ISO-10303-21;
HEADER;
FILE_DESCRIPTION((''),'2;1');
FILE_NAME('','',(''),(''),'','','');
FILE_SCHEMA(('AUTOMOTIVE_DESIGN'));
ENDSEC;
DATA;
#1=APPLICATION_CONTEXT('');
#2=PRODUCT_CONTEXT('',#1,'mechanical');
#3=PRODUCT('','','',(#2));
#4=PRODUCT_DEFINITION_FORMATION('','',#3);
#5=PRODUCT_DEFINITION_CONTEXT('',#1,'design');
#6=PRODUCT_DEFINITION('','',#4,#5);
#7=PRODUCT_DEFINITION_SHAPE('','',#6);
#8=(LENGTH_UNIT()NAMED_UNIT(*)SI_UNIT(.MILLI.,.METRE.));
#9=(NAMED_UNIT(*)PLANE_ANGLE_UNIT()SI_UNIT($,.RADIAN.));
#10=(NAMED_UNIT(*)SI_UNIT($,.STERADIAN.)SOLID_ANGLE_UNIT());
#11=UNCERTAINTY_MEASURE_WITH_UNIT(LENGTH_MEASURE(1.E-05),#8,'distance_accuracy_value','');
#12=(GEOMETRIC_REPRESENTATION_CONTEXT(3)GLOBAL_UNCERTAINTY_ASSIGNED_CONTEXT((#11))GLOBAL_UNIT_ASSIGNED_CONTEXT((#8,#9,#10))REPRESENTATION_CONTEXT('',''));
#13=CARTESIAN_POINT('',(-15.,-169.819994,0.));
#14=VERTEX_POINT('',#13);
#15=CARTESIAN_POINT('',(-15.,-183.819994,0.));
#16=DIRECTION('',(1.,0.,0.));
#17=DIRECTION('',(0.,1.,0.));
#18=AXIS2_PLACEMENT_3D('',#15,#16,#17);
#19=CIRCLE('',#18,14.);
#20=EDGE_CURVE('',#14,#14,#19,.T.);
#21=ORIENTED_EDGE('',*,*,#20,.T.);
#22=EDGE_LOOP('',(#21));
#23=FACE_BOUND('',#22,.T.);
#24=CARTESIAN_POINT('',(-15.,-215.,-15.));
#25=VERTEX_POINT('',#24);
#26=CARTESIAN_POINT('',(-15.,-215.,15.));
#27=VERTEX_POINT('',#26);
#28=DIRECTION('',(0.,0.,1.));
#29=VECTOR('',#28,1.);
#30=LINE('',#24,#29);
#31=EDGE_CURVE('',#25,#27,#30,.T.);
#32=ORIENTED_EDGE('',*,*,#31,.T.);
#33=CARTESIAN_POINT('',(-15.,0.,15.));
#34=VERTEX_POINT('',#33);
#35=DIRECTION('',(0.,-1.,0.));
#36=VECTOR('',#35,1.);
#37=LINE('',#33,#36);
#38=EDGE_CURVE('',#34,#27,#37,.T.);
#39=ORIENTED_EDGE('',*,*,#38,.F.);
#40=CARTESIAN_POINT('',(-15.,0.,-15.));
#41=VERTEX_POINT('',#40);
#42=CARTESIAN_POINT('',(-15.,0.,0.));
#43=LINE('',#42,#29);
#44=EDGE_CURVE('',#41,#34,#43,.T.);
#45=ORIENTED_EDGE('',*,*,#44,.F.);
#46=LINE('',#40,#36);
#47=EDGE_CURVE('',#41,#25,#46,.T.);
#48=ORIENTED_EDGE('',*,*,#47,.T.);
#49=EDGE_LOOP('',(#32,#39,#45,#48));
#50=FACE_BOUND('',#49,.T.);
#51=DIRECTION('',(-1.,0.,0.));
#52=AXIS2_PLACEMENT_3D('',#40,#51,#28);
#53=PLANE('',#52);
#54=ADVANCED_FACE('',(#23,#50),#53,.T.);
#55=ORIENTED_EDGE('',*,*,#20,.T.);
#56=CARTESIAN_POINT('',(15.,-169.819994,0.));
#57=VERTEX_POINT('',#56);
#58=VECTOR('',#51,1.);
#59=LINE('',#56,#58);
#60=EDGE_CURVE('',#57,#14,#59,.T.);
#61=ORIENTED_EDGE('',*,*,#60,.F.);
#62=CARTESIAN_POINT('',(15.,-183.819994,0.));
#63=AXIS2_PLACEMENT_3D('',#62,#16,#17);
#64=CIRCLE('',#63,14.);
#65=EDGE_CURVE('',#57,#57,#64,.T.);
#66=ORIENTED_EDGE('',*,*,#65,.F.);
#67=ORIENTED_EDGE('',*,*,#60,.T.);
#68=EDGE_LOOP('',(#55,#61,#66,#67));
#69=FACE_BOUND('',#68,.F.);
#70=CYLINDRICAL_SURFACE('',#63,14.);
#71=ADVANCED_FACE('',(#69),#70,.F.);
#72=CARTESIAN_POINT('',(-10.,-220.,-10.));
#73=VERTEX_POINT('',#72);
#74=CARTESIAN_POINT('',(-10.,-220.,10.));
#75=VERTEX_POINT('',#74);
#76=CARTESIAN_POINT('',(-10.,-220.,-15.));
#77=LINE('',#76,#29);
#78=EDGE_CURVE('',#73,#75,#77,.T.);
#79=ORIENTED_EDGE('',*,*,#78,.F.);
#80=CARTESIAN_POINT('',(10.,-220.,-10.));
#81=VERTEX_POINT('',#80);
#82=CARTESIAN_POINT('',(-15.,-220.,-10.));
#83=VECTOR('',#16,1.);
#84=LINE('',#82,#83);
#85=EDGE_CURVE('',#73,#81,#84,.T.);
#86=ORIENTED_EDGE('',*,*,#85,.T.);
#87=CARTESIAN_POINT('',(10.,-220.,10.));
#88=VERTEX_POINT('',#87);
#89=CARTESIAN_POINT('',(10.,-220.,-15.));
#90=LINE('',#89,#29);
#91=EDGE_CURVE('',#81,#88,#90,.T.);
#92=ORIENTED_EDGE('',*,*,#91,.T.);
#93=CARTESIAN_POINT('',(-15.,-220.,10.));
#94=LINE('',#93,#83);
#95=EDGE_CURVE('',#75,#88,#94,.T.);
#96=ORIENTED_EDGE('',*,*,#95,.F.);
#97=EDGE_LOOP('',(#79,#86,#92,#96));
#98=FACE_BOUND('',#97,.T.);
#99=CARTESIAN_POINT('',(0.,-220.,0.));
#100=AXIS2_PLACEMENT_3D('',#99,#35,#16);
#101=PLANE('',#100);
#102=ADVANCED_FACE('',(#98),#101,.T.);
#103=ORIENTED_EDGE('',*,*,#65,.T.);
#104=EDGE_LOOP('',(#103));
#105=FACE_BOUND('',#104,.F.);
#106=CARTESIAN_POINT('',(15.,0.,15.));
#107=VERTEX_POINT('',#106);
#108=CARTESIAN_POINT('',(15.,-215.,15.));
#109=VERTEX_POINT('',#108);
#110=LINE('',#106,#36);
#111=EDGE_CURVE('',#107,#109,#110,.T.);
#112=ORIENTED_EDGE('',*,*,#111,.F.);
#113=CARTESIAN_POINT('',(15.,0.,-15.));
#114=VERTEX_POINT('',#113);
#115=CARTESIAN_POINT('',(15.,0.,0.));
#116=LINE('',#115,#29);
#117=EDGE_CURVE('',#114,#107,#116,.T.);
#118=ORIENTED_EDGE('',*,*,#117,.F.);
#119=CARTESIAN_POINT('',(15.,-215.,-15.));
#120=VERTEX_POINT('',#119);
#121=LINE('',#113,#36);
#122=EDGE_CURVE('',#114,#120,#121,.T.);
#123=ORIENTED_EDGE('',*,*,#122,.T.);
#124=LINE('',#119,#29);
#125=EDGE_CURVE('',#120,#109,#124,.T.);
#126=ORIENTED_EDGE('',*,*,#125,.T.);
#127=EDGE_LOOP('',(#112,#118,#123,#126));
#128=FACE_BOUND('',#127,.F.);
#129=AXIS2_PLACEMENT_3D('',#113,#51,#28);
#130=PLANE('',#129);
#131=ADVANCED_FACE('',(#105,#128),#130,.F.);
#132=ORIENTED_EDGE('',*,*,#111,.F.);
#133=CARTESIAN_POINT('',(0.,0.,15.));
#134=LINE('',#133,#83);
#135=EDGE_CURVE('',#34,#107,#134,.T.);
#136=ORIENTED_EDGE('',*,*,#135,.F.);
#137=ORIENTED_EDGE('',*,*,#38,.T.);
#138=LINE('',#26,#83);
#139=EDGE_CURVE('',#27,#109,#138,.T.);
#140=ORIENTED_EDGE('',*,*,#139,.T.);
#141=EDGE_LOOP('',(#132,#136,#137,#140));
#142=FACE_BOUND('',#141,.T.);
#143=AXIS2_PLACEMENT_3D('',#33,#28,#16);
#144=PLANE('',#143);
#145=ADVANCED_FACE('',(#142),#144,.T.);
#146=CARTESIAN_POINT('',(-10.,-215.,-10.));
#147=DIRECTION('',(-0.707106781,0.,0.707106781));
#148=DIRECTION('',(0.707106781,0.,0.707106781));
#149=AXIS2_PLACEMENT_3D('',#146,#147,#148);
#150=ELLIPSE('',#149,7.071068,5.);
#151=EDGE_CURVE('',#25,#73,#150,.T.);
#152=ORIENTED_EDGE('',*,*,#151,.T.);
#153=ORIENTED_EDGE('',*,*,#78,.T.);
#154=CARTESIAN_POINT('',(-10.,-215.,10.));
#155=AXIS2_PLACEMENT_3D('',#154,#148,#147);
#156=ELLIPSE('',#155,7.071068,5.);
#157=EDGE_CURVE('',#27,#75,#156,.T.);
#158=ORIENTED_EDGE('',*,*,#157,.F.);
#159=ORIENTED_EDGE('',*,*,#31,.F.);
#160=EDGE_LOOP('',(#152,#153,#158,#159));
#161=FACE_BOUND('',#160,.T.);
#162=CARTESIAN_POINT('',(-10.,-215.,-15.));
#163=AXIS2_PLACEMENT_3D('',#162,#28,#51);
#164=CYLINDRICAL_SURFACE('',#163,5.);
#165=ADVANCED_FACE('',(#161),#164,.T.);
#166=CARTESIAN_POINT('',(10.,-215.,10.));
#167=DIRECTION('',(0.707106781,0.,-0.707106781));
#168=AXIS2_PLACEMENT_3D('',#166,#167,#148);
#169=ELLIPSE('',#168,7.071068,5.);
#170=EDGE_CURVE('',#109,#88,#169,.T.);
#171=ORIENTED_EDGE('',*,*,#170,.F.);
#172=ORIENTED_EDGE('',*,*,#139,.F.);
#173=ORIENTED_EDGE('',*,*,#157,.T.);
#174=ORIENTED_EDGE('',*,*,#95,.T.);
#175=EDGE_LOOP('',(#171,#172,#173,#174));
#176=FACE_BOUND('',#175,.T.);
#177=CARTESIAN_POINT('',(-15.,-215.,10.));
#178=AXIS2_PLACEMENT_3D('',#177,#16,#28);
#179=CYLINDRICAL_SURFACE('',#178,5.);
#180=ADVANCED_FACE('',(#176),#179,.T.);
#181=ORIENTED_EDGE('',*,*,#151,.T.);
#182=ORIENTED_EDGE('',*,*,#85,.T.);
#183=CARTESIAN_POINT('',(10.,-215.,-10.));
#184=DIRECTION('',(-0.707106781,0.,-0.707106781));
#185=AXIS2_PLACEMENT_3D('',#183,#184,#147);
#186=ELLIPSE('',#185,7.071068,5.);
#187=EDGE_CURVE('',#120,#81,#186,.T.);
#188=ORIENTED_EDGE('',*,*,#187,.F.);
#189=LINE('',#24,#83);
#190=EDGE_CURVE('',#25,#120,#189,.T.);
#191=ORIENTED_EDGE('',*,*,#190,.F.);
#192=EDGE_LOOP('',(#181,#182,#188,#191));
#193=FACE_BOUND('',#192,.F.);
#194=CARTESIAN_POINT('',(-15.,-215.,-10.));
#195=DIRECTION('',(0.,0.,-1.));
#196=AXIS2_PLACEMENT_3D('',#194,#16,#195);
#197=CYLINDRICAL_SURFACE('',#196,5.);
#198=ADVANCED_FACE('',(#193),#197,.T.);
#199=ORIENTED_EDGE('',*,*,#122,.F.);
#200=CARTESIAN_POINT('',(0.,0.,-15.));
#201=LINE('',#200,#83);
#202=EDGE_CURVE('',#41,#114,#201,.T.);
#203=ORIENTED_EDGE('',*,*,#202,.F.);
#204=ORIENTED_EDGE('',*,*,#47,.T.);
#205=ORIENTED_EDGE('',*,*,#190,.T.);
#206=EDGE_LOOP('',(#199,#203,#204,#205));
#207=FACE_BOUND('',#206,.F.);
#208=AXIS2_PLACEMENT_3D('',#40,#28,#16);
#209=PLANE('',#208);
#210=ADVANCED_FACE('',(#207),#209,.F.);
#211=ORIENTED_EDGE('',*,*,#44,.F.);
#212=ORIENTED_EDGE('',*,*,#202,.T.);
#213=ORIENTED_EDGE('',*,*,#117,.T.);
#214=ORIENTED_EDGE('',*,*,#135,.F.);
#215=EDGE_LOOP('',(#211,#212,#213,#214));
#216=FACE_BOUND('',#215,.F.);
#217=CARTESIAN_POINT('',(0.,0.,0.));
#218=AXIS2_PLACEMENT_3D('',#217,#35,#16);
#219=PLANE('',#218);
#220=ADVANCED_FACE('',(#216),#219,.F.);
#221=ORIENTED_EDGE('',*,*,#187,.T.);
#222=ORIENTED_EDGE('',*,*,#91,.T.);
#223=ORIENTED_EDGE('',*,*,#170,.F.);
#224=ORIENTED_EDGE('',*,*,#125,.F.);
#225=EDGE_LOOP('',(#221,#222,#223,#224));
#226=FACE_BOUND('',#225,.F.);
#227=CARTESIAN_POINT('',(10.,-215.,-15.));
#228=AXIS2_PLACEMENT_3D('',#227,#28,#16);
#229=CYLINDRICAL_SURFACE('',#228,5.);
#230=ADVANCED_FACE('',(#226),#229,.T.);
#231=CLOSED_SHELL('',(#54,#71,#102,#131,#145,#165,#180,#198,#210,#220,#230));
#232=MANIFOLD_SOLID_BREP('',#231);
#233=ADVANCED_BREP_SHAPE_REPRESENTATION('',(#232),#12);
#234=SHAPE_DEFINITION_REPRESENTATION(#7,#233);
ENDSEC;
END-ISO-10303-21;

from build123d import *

# Parameters (mm, degrees)
F0_W     = 30
F0_H     = 30
F1_DEPTH = 220
F2_R     = 5
F3_R     = 14
F4_DEPTH = 40


with BuildPart() as f1:
    # F0 (on Front) → F1 (new body)
    with BuildSketch(Plane.XZ):
        Rectangle(F0_W, F0_H)
    extrude(amount=F1_DEPTH)

    # F2
    f2_edges = [f1.edges().sort_by_distance(p)[0] for p in [
        (15, -220, 0),
        (-15, -220, 0),
        (0, -220, 15),
        (0, -220, -15),
    ]]
    fillet(f2_edges, radius=F2_R)

    # F3 (on face) → F4 (cut)
    with BuildSketch(Plane.YZ.offset(15)):
        with Locations((-183.8199943304, 0)):
            Circle(F3_R)
    extrude(amount=-F4_DEPTH, mode=Mode.SUBTRACT)


solid = f1.part
